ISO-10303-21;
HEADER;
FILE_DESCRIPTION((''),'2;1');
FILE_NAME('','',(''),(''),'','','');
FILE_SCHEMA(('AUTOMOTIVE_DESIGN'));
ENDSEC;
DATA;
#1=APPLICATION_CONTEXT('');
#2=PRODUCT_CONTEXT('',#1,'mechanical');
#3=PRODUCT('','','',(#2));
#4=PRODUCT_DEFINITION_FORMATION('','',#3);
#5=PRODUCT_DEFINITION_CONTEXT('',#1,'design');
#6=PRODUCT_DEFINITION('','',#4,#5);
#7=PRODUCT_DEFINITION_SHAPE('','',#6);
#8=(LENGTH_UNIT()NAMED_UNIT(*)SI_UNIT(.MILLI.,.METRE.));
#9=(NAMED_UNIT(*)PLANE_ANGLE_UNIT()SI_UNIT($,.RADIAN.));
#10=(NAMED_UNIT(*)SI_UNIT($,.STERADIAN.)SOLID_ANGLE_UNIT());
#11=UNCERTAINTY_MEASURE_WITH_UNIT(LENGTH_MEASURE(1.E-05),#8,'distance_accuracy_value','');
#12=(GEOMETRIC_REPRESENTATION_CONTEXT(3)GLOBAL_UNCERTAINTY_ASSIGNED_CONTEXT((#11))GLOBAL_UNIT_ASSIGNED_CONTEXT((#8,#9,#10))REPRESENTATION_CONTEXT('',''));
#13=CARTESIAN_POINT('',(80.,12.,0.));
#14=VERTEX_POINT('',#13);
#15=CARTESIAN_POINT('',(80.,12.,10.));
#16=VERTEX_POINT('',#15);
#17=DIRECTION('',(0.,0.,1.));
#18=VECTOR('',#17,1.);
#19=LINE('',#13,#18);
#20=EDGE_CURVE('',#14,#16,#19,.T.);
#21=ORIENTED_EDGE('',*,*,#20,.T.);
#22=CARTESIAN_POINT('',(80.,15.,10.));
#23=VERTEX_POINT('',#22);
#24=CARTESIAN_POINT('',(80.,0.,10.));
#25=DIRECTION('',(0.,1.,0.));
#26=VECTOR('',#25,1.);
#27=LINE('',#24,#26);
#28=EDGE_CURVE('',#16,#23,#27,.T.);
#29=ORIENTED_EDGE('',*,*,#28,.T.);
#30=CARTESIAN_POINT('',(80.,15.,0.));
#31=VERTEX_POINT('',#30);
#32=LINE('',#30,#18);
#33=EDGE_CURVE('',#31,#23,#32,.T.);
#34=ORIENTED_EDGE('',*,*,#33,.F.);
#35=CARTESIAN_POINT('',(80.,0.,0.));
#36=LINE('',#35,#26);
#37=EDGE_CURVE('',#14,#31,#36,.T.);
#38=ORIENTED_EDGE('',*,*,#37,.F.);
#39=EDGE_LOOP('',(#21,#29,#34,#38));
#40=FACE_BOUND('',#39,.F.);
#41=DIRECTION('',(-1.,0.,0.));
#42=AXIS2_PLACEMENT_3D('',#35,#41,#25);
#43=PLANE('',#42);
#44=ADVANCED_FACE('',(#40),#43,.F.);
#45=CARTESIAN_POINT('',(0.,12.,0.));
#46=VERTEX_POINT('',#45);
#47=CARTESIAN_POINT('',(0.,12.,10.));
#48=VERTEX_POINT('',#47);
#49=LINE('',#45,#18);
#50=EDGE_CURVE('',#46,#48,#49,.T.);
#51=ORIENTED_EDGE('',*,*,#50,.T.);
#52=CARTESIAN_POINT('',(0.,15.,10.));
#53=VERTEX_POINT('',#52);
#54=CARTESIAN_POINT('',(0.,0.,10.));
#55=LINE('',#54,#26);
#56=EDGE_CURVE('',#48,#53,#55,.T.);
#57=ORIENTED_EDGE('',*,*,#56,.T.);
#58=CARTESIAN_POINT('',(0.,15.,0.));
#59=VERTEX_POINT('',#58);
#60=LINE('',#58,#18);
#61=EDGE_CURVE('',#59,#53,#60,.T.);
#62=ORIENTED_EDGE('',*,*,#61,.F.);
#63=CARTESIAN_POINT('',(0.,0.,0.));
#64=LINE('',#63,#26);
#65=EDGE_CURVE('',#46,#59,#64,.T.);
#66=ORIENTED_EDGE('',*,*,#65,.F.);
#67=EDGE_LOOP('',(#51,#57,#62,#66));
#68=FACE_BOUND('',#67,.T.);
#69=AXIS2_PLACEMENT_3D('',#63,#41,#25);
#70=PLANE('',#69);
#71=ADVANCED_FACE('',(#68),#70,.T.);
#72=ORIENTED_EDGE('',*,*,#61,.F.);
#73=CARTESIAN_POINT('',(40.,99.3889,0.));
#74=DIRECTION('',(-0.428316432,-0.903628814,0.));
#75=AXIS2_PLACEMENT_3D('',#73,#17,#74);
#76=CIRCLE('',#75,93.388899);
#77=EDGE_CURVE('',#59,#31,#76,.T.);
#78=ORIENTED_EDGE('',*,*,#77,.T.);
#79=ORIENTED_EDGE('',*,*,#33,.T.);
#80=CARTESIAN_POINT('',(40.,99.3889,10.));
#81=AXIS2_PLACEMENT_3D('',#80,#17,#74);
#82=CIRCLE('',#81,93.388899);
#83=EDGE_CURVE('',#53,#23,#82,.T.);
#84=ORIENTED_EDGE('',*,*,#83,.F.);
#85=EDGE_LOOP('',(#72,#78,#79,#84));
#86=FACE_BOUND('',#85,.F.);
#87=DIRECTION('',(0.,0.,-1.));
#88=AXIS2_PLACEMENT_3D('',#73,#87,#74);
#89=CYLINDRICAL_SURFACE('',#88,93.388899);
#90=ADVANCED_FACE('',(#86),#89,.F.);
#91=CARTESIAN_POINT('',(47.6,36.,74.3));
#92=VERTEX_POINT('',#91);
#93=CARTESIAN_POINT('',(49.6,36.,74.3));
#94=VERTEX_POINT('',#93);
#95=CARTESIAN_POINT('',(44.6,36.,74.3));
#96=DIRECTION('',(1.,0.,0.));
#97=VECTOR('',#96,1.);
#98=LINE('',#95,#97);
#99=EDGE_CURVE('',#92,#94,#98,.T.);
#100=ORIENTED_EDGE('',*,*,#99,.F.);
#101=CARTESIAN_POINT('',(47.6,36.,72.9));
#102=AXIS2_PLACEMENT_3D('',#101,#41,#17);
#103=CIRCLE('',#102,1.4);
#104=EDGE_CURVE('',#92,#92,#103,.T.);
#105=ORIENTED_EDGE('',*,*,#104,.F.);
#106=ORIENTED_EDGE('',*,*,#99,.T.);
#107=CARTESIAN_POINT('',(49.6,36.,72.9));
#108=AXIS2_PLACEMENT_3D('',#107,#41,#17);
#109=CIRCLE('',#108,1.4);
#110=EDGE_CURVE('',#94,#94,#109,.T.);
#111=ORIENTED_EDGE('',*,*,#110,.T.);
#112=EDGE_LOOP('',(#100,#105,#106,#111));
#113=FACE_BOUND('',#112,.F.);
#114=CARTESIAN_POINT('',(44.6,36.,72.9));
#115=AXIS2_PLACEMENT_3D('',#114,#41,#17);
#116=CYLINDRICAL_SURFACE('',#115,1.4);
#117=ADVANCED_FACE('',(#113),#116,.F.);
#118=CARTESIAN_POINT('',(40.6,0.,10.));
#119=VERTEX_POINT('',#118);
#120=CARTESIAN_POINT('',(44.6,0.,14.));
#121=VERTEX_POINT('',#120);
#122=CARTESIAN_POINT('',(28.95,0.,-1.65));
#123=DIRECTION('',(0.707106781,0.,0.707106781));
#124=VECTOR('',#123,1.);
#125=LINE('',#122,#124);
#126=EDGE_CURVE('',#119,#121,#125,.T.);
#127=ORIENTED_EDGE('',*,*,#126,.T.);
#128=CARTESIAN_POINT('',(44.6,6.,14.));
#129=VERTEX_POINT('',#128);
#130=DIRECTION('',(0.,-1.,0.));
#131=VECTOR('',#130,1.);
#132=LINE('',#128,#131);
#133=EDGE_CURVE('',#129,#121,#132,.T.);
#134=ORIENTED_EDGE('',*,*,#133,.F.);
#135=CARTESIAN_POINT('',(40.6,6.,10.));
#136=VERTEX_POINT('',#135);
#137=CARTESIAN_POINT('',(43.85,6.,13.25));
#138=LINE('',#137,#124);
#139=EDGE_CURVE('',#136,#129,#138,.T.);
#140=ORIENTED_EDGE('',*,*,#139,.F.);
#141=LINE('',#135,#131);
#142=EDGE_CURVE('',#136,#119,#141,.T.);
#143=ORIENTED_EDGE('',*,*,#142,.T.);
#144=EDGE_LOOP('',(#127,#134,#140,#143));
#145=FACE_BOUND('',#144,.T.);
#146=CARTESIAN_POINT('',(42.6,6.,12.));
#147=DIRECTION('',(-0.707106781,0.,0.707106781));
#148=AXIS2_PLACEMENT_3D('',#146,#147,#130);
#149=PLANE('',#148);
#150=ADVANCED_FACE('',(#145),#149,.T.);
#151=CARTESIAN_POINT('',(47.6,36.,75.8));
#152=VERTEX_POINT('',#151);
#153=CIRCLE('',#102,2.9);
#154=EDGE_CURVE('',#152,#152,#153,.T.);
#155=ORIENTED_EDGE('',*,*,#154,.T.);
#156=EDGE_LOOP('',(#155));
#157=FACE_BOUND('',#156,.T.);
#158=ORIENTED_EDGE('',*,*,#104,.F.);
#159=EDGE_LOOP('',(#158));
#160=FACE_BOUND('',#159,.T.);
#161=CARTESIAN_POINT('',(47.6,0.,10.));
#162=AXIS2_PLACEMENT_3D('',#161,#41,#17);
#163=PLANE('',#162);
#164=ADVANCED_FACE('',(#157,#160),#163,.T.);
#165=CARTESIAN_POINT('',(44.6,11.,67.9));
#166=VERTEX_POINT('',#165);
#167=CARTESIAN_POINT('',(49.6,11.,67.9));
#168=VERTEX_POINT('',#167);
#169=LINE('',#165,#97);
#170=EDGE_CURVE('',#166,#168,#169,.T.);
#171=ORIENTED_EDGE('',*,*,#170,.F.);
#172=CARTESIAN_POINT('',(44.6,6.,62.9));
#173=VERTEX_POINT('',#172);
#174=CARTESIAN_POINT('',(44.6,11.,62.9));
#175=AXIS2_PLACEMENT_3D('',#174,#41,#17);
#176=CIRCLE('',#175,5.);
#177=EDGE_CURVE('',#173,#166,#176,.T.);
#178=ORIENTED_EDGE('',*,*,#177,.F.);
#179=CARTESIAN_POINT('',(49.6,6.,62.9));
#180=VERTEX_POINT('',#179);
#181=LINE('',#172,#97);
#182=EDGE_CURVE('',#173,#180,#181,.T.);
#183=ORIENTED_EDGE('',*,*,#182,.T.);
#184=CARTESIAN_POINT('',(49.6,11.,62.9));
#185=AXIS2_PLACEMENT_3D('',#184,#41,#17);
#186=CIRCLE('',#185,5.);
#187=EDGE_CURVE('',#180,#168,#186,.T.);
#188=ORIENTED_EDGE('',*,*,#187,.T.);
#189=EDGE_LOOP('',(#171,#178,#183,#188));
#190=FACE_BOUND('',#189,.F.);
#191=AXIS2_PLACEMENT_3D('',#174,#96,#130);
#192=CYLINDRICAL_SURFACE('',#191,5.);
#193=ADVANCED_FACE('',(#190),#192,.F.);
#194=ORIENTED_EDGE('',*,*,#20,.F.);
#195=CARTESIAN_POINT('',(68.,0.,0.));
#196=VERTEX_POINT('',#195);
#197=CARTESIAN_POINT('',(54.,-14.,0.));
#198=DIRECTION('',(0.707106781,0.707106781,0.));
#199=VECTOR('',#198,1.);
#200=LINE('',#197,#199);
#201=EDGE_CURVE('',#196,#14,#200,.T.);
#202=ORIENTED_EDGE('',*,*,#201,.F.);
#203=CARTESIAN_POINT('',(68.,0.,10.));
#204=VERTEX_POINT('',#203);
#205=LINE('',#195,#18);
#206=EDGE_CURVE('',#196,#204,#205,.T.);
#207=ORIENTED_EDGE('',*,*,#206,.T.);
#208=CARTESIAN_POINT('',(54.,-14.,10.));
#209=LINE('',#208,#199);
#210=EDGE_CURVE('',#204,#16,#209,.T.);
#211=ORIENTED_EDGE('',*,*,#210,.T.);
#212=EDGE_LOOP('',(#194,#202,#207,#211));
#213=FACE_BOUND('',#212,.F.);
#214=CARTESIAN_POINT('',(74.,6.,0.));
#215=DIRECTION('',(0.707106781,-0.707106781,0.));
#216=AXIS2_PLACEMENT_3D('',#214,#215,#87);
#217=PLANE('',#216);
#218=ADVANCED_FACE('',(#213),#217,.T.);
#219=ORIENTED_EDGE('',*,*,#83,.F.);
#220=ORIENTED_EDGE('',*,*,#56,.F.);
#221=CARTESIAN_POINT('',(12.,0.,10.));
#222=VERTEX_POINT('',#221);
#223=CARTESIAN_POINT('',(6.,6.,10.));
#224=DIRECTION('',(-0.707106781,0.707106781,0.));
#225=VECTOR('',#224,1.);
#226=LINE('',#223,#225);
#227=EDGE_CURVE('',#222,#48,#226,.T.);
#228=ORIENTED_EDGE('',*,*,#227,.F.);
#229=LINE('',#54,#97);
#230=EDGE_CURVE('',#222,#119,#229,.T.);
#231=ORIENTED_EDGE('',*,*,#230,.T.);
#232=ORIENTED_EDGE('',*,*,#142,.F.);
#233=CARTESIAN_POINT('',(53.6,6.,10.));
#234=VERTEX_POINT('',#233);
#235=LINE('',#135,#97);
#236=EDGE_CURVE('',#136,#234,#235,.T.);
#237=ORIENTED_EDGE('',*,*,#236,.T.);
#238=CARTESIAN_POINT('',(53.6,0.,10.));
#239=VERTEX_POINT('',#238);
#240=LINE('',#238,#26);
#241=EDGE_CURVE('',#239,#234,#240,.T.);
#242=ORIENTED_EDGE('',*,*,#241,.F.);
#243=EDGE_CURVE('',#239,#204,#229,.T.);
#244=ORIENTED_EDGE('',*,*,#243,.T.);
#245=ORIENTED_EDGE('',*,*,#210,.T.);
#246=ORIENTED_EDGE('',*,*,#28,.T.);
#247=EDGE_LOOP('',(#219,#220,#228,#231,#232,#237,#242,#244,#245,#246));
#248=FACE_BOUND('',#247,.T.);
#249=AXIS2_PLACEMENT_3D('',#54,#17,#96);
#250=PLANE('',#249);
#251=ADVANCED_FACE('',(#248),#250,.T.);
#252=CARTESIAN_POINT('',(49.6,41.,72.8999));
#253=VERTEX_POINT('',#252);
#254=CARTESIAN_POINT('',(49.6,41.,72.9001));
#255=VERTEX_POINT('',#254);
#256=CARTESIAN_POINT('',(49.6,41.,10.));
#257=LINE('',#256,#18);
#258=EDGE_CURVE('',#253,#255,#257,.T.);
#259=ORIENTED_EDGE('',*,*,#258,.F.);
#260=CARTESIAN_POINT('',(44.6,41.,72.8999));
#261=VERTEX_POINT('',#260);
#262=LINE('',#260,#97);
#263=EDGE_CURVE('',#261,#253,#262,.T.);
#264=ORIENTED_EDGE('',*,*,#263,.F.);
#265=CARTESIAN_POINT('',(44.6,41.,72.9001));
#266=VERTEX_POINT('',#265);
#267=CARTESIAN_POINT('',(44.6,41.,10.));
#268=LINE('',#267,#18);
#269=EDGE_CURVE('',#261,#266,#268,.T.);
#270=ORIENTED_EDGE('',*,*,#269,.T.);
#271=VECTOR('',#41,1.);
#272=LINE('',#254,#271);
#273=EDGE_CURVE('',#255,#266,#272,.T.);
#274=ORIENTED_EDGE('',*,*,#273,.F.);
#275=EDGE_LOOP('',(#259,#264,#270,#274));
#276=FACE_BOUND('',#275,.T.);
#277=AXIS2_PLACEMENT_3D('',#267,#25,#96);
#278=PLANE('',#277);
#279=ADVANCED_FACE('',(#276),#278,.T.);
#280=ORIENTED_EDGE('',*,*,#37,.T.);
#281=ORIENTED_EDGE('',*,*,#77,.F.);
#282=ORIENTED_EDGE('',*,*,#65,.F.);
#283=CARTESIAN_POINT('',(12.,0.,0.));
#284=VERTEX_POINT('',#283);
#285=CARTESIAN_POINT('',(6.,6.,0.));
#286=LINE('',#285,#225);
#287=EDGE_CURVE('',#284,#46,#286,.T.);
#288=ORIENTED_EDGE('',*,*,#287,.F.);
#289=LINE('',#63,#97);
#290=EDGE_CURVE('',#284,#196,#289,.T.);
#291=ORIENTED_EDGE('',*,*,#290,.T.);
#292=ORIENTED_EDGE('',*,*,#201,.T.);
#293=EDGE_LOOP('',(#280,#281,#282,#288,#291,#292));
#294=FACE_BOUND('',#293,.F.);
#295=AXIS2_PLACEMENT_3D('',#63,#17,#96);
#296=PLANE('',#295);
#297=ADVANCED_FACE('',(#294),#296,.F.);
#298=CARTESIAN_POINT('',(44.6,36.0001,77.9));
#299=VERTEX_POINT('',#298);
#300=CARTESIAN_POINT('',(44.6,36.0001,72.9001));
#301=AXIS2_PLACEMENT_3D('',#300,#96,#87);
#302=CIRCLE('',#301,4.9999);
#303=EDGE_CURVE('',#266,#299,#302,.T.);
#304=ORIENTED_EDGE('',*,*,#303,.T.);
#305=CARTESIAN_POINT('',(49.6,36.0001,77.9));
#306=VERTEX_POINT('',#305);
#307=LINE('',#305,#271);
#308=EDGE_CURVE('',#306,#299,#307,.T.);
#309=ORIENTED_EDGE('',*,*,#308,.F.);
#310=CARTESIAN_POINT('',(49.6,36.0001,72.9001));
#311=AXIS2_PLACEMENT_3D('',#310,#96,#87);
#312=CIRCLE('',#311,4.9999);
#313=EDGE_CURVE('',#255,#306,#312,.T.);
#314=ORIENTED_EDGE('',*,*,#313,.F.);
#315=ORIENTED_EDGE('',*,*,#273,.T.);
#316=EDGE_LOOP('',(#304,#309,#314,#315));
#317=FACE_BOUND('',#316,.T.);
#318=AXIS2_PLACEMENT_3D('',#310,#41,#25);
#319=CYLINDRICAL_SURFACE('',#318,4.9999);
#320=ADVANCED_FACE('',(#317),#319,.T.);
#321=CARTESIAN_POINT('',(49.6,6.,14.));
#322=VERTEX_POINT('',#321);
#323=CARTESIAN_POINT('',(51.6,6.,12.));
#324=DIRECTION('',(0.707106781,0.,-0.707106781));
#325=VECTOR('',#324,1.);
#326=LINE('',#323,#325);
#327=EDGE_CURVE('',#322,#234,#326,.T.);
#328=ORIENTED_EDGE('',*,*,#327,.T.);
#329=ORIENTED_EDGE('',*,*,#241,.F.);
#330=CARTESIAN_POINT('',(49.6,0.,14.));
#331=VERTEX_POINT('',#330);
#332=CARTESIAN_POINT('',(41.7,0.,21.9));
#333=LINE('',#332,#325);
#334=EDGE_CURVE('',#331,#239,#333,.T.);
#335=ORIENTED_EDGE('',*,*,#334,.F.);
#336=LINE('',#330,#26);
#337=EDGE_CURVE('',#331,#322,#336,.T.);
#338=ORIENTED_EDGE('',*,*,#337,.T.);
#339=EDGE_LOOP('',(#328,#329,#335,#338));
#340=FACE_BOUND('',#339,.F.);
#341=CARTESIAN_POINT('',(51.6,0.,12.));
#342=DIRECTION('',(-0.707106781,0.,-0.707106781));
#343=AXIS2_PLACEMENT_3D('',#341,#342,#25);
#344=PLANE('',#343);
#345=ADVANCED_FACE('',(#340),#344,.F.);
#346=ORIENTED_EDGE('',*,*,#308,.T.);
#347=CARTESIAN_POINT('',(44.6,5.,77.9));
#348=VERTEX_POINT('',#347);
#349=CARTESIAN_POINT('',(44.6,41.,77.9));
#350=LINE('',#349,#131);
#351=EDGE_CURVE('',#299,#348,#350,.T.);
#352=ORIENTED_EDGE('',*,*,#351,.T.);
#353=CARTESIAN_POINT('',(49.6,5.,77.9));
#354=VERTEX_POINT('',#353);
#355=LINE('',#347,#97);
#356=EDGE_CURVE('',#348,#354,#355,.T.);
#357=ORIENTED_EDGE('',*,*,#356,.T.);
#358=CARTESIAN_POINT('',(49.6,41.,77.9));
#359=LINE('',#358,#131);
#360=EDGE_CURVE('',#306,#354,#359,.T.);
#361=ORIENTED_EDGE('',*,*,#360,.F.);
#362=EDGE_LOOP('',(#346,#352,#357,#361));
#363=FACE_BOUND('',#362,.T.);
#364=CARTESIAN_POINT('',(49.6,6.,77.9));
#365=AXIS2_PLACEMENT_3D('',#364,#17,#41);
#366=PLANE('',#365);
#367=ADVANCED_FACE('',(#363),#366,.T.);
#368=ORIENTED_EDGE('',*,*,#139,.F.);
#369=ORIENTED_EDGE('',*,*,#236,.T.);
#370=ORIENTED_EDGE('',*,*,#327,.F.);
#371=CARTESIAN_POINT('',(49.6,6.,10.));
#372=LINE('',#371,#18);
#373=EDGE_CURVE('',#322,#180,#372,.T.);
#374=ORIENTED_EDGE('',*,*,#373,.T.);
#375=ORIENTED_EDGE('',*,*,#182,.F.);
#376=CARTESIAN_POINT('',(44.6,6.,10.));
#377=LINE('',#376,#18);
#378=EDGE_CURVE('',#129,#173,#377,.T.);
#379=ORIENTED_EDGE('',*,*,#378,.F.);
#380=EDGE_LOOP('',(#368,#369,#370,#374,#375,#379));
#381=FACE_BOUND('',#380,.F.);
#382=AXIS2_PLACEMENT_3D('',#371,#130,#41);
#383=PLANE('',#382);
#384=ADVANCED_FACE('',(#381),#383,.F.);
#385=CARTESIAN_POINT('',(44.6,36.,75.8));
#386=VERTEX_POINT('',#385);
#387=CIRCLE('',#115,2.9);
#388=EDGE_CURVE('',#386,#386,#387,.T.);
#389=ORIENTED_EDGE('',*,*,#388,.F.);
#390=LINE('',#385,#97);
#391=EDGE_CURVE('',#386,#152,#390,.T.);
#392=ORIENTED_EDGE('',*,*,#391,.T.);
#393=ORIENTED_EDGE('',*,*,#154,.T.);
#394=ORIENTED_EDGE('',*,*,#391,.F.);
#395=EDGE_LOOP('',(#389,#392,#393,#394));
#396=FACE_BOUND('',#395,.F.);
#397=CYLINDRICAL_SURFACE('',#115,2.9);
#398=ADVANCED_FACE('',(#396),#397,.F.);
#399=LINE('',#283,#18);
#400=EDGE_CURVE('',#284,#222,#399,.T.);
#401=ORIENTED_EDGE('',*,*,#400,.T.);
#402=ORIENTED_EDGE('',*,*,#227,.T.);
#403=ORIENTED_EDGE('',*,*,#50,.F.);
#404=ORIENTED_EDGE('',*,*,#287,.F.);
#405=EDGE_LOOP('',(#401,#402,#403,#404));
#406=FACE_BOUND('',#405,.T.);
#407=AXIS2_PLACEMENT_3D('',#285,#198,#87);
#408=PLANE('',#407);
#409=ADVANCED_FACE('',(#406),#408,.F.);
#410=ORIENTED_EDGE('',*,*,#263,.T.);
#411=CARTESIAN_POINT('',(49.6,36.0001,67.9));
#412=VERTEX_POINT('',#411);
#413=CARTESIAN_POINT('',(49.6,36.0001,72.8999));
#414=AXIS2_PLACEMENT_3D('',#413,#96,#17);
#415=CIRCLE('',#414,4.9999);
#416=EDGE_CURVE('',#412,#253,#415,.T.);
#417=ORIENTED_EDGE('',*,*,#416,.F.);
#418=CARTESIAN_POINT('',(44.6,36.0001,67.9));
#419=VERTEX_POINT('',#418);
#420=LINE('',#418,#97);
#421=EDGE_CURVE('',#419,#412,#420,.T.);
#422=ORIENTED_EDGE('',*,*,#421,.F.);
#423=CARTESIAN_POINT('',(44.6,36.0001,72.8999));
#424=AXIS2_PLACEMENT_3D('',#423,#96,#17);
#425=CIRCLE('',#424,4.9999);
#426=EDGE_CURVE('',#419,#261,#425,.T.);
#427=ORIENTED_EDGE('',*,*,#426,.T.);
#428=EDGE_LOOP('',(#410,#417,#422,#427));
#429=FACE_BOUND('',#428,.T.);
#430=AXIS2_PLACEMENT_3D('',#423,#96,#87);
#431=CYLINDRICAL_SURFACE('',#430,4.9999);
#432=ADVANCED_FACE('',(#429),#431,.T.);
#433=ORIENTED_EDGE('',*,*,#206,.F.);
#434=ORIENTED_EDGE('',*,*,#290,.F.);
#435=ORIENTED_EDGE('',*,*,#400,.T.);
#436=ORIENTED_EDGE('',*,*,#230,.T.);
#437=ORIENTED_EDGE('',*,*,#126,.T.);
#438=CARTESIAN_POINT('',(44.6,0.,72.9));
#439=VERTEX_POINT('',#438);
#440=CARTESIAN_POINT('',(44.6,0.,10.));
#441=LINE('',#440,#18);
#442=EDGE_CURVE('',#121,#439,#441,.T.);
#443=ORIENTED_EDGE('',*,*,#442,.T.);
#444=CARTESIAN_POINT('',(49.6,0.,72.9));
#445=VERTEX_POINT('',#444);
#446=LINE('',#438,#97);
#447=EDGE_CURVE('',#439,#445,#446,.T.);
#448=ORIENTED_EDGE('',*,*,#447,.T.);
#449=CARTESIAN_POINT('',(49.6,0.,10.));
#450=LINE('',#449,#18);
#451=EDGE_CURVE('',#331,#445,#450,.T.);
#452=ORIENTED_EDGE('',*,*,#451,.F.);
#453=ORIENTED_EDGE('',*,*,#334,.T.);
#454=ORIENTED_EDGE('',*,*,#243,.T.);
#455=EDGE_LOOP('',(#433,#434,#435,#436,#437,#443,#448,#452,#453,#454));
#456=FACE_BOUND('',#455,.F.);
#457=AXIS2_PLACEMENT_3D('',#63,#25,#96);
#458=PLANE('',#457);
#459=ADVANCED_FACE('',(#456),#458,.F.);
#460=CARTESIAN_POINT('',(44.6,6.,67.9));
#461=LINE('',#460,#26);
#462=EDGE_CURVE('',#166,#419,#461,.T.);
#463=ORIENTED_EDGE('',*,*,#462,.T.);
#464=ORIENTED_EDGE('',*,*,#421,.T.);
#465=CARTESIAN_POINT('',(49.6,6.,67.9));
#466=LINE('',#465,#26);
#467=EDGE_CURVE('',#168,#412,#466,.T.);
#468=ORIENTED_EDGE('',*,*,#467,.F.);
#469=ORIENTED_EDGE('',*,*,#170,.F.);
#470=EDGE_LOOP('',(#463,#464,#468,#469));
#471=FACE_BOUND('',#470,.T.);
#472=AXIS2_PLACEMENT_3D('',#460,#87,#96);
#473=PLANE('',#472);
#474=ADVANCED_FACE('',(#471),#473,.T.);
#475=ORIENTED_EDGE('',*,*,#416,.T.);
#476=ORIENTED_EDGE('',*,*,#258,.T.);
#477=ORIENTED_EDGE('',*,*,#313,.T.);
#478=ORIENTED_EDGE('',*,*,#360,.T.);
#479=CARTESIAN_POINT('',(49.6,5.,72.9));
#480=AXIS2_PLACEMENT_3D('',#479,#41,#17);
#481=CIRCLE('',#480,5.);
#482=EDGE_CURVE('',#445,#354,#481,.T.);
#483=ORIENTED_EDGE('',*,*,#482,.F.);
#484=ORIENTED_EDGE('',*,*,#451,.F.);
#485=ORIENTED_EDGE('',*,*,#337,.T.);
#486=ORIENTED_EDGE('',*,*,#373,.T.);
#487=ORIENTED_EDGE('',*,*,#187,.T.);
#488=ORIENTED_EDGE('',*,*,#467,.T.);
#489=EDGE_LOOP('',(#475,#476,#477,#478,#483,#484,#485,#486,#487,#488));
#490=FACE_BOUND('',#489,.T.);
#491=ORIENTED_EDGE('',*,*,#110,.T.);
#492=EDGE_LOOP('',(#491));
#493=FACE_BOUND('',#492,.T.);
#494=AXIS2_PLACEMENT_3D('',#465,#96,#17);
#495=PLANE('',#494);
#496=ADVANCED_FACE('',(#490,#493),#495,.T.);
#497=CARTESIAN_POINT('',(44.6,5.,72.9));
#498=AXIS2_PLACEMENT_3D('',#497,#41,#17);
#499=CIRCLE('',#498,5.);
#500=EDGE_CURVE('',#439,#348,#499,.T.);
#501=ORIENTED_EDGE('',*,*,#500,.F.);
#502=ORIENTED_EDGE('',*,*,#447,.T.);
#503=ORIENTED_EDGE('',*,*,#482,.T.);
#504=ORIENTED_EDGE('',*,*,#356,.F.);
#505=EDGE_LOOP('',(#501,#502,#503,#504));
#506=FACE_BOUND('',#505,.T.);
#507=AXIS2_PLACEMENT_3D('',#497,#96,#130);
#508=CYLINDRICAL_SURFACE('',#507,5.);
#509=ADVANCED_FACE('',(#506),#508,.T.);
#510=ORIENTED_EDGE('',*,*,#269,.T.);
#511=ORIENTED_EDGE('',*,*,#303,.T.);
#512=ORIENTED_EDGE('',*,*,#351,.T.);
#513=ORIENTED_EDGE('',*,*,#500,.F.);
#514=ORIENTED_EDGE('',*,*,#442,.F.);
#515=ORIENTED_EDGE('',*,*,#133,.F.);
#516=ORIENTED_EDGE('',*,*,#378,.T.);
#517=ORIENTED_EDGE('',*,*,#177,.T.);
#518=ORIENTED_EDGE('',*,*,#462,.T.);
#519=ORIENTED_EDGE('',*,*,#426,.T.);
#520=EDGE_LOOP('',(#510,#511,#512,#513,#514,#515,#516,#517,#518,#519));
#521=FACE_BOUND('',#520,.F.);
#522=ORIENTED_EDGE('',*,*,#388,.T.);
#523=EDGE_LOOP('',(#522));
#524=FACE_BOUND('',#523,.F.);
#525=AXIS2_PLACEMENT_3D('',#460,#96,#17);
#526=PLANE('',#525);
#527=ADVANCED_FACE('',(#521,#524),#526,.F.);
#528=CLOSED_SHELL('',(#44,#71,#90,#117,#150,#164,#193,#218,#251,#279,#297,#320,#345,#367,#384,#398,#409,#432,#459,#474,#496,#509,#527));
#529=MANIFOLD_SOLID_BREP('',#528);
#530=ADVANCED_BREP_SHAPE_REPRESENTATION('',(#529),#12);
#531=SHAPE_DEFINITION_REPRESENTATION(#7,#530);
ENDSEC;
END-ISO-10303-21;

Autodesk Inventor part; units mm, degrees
ref_plane "YZ Plane" through (0, 0, 0) normal (1, 0, 0) x (0, 1, 0)
ref_plane "XZ Plane" through (0, 0, 0) normal (0, 1, 0) x (-1, 0, 0)
ref_plane "XY Plane" through (0, 0, 0) normal (0, 0, 1) x (1, 0, 0)
sketch "Esquisse1" plane through (0, 0, 0) normal (0, 0, 1) x (1, 0, 0)
  line L0 (0, 0) -> (0, 15)
  line L1 (0, 0) -> (80, 0)
  line L2 (80, 0) -> (80, 15)
  arc A0 (0, 15) -> (80, 15) centre (40, 99.3889) ccw
  line L3 (0, 6) -> (80, 6) construction
  line L4 (40, 0) -> (40, 6) construction
  dimension "d0" = 15
  dimension "d1" = 80
  dimension "d28" = 6
extrude "Extrusion1" add sketch "Esquisse1" along normal blind 10
sketch "Esquisse2" plane through (0, 0, 10) normal (0, 0, 1) x (1, 0, 0)
  line L0 (0, 0) -> (80, 0) projected
  line L1 (44.6, 0) -> (49.6, 0)
  line L2 (49.6, 0) -> (49.6, 6)
  line L3 (49.6, 6) -> (44.6, 6)
  line L4 (44.6, 6) -> (44.6, 0)
  line L5 (0, 15) -> (0, 0) projected
  line L6 (0, 6) -> (80, 6) construction
  line L7 (80, 0) -> (80, 15) projected
  arc A0 (0, 15) -> (80, 15) centre (40, 99.3889) ccw projected
  line L8 (40, 0) -> (40, 6) construction
  dimension "d6" = 5
  dimension "d9" = 80
  dimension "d11" = 6
  dimension "d27" = 4.6
extrude "Extrusion2" add sketch "Esquisse2" along normal blind 67.9 contours L4 L3 L2 L0
sketch "Esquisse6" plane through (44.6, 6, 10) normal (0, 1, 0) x (1, 0, 0)
  line L0 (5, 0) -> (5, -67.9) projected
  line L1 (0, 0) -> (0, -67.9) projected
  line L2 (5, -67.9) -> (0, -67.9)
  line L3 (0, -67.9) -> (0, -57.9)
  line L4 (0, -57.9) -> (5, -57.9)
  line L5 (5, -57.9) -> (5, -67.9)
  point P0 (-44.6, 10)
  point P1 (5, -57.9)
  dimension "d29" = 10
extrude "Extrusion5" add sketch "Esquisse6" along normal blind 35
sketch "Esquisse7" plane through (44.6, 0, 10) normal (-1, 0, 0) x (0, 0, 1)
  line L0 (67.9, 41) -> (57.9, 41) construction
  line L1 (62.9, 41) -> (62.9, 0) construction
  line L2 (0, 0) -> (67.9, 0) construction
  circle A0 centre (62.9, 36) radius 2.9
  circle A1 centre (62.9, 36) radius 1.4
  point P0 (-10, 0)
  dimension "d38" = 2.8
  dimension "d53" = 5.8
  dimension "d54" = 5
extrude "Extrusion6" cut sketch "Esquisse7" against normal up to surface (5 mm away) contours A1
chamfer "Chanfrein1" distance 4 angle 45 2 edges at (44.6, 3, 10) (49.6, 3, 10)
fillet "Congé1" radius 5 2 edges at (47.1, 0, 77.9) (47.1, 6, 67.9)
fillet "Congé2" radius 5 2 edges at (47.1, 41, 77.9) (47.1, 41, 67.9)
chamfer "Chanfrein2" distance 12 angle 45 2 edges at (0, 0, 5) (80, 0, 5)
extrude "Extrusion8" cut sketch "Esquisse7" against normal blind 3
properties part number "_Impression 3D"
